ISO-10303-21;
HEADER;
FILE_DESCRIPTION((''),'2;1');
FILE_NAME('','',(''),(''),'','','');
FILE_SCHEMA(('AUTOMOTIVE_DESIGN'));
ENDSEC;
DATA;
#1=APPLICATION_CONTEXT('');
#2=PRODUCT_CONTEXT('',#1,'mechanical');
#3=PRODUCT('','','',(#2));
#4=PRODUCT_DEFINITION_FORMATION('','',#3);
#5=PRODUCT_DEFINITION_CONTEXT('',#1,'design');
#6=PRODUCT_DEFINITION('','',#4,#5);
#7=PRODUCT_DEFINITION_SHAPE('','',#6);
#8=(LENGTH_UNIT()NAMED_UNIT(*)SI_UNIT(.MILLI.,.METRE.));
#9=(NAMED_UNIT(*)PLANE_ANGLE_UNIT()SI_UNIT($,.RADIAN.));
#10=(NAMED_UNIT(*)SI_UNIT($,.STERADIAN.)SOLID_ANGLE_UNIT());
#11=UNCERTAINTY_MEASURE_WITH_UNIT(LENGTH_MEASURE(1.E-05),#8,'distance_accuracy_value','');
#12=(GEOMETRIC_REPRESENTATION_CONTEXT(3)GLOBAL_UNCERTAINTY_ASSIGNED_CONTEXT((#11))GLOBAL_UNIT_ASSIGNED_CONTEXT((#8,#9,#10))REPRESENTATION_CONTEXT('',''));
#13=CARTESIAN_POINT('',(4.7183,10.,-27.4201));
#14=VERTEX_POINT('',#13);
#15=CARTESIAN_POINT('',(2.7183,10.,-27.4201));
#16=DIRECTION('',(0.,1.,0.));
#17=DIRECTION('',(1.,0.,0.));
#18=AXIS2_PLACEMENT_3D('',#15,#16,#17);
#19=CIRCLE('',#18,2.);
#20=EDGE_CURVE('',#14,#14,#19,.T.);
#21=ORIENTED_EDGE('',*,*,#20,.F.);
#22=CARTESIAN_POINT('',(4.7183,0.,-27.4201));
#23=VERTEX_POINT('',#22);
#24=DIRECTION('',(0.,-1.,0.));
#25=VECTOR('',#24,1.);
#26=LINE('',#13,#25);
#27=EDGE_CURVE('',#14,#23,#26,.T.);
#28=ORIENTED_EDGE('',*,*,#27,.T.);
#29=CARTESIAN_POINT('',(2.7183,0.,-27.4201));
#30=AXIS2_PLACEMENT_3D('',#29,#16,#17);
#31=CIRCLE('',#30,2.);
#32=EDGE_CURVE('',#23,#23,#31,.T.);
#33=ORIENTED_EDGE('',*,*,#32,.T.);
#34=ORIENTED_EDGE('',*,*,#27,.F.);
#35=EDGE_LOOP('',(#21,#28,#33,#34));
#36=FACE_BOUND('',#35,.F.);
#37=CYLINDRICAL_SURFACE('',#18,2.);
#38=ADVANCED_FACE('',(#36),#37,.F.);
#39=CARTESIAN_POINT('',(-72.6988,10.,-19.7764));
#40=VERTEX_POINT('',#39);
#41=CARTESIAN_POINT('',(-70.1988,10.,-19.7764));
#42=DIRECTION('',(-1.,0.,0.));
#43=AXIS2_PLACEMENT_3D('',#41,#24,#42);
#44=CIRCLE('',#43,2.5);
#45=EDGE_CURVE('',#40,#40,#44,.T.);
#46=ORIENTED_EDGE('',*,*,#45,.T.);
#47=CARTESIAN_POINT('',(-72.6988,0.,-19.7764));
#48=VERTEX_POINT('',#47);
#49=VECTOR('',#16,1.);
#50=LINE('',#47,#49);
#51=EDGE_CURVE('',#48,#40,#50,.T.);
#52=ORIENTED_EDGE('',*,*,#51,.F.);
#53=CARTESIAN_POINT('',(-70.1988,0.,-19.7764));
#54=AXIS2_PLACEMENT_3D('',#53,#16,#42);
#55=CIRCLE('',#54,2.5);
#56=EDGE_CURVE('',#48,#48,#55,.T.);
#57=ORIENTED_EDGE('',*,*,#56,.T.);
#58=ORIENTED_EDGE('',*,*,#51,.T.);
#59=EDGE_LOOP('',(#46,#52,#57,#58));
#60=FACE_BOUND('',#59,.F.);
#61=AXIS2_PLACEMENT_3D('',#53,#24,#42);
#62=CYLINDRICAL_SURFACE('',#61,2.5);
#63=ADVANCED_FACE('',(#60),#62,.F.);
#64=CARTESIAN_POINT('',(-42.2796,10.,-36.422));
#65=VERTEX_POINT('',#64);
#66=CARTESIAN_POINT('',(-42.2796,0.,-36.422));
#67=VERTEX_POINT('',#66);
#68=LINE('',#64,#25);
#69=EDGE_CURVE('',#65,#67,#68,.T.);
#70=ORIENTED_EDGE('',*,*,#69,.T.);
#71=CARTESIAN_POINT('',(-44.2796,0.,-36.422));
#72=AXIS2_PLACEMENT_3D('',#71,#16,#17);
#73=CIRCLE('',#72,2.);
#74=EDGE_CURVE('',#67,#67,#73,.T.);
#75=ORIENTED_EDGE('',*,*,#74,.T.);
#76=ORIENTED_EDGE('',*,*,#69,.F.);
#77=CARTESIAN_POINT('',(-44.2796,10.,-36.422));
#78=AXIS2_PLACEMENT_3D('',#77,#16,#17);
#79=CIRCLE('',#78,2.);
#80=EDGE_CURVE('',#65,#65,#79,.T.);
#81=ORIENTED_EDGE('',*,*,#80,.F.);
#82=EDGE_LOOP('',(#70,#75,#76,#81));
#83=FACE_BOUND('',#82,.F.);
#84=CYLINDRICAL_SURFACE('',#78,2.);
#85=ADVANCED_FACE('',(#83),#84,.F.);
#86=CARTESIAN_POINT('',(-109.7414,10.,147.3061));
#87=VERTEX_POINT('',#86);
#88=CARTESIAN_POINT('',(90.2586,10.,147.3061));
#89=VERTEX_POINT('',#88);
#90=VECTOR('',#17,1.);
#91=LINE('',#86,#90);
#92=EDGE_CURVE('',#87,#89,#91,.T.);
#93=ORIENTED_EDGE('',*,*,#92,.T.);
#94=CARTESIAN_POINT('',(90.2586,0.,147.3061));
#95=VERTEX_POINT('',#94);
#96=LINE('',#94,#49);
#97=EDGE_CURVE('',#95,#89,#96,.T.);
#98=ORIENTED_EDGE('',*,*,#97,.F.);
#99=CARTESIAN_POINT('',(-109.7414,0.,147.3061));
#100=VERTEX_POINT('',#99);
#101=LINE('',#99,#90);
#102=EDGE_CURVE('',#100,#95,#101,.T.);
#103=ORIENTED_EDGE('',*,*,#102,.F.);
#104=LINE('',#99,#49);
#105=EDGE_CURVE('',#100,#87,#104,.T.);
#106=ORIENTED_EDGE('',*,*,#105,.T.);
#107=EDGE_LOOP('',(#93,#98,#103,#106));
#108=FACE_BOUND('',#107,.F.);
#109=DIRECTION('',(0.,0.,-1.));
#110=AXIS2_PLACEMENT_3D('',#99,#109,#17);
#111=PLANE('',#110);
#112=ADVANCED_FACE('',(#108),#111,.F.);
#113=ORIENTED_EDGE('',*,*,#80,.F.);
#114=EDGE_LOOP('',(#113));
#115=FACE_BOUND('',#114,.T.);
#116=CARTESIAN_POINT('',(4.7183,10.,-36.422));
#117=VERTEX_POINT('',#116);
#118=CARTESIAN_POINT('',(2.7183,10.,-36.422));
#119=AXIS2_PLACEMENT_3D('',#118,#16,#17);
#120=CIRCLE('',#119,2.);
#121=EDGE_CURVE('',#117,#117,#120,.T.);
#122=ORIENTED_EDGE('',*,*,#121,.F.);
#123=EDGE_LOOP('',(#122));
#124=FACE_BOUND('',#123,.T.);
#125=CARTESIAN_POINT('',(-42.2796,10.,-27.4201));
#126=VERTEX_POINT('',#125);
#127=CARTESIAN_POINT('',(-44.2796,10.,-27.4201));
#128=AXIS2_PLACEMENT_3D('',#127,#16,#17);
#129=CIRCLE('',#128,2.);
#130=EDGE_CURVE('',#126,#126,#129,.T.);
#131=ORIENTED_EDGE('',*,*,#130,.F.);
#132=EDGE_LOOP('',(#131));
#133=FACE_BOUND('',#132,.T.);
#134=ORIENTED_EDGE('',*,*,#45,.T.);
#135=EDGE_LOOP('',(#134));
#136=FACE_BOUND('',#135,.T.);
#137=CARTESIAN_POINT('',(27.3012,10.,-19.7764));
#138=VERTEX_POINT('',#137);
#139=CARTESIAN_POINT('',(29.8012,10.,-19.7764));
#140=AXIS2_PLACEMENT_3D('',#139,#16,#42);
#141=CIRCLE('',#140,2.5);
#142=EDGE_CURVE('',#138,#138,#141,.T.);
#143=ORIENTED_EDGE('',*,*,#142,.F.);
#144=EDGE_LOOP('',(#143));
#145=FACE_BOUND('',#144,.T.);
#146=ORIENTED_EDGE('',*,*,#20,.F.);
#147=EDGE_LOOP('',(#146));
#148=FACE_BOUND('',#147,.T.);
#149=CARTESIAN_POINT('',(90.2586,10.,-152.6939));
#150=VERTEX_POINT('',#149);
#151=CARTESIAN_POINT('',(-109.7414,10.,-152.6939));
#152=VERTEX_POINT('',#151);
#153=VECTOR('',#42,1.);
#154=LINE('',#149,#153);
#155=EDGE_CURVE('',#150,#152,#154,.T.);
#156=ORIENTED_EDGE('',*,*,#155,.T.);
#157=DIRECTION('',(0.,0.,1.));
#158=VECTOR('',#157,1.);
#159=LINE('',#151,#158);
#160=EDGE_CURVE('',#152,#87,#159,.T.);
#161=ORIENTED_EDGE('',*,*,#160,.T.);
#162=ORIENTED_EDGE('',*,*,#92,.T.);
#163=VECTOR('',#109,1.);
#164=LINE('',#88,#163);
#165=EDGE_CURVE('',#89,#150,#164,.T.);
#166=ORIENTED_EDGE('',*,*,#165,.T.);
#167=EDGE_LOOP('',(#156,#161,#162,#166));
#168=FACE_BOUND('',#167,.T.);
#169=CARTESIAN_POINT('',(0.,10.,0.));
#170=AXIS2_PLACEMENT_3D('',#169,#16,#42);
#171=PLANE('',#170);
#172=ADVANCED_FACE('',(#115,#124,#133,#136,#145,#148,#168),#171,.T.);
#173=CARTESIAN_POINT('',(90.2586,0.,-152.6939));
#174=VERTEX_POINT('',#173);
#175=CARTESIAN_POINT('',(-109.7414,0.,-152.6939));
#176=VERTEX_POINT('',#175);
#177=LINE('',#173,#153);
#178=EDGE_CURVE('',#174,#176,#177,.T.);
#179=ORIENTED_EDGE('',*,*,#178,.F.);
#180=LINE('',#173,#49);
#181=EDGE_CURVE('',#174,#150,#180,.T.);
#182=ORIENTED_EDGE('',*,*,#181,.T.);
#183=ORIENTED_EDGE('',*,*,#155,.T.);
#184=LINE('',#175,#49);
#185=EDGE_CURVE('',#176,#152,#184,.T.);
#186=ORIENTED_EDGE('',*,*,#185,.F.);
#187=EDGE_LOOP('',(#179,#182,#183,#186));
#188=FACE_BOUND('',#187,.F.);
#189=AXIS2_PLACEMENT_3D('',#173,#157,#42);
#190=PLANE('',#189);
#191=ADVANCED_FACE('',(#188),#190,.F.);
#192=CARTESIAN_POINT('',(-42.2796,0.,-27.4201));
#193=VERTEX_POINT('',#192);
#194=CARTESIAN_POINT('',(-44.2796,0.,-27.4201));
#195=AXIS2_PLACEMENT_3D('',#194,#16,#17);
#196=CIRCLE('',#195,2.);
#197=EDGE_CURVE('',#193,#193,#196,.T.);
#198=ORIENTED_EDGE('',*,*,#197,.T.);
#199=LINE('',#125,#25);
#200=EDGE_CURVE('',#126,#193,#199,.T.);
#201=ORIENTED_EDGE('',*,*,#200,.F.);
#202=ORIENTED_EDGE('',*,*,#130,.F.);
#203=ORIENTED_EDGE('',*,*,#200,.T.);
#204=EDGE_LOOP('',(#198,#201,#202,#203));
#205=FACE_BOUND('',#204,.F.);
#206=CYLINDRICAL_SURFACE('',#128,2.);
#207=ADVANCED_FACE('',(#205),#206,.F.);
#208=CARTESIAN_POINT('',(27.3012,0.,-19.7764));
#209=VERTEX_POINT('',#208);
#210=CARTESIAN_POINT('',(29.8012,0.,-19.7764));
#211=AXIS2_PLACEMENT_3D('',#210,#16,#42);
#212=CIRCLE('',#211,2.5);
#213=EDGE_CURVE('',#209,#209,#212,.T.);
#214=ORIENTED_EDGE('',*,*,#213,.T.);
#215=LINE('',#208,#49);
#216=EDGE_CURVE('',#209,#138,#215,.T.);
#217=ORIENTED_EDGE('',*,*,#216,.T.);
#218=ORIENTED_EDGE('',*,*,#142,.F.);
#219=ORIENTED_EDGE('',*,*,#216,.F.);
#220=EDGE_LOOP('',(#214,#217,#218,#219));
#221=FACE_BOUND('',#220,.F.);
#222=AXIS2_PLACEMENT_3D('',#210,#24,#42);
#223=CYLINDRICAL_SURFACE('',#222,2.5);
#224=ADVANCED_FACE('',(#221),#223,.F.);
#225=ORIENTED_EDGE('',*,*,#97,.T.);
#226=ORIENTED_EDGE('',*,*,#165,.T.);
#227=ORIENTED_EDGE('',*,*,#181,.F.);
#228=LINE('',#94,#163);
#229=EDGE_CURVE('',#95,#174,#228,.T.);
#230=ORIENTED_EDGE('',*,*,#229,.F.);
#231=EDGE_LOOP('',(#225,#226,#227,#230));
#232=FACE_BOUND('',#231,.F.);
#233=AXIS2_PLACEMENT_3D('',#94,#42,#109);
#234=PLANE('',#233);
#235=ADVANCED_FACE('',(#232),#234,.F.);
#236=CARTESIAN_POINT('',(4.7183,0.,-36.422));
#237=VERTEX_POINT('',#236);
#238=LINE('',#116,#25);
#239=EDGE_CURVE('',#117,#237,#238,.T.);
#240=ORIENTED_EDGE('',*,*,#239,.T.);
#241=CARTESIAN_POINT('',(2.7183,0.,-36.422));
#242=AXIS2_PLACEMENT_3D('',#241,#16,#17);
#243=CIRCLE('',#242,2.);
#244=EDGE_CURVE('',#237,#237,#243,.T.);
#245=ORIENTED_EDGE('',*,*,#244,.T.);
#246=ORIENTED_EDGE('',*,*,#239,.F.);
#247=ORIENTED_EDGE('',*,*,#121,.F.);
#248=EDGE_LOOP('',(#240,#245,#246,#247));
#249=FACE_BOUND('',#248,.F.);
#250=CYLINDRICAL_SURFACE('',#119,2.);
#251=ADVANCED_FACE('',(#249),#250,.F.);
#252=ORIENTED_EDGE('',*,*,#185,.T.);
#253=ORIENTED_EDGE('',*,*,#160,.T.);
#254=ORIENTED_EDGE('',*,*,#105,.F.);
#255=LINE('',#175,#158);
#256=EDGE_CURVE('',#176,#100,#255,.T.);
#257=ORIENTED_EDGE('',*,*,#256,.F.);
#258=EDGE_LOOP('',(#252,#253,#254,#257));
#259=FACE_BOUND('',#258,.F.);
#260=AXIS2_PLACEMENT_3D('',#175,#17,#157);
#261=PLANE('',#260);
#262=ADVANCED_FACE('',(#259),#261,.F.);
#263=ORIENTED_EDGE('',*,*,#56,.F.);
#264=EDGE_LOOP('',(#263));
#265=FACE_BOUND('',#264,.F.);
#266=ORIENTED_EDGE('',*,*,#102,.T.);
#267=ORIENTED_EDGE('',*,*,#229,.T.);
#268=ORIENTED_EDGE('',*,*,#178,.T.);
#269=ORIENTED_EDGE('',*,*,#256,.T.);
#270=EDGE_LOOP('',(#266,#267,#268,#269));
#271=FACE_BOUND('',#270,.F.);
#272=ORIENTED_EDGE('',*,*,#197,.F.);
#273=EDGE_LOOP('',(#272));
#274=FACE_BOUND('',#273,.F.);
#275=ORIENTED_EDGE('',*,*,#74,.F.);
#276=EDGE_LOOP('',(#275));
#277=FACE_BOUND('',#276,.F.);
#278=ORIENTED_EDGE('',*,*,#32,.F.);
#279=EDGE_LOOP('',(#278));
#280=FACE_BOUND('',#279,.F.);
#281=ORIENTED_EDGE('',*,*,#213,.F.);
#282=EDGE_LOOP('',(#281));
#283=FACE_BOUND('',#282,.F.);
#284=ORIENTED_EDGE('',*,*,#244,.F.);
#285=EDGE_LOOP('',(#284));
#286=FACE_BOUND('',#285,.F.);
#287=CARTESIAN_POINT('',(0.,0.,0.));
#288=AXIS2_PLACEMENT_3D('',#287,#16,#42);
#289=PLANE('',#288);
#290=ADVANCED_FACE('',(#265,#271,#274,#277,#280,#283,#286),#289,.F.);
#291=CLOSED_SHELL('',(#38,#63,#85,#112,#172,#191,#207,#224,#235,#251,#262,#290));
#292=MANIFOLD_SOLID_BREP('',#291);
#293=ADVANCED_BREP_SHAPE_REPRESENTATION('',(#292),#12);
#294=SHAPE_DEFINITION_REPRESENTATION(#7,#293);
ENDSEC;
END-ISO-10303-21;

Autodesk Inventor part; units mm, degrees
ref_plane "YZ Plane" through (0, 0, 0) normal (1, 0, 0) x (0, 1, 0)
ref_plane "XZ Plane" through (0, 0, 0) normal (0, 1, 0) x (-1, 0, 0)
ref_plane "XY Plane" through (0, 0, 0) normal (0, 0, 1) x (1, 0, 0)
sketch "Sketch1" plane through (0, 0, 0) normal (0, 1, 0) x (-1, 0, 0)
  line L0 (109.7414, 147.3061) -> (-90.2586, 147.3061)
  line L1 (-90.2586, 147.3061) -> (-90.2586, -152.6939)
  line L2 (-90.2586, -152.6939) -> (109.7414, -152.6939)
  line L3 (109.7414, -152.6939) -> (109.7414, 147.3061)
  circle A0 centre (70.1988, -19.7764) radius 2.5
  circle A1 centre (-29.8012, -19.7764) radius 2.5
  line L4 (70.1988, -19.7764) -> (-29.8012, -19.7764)
  point P0 (0, 0)
  dimension "d0" = 200
  dimension "d1" = 300
  dimension "d2" = 5
  dimension "d3" = 5
  dimension "d4" = 100
extrude "Extrusion1" add sketch "Sketch1" along normal blind 10
sketch "Sketch3" plane through (0, 10, 0) normal (0, 1, 0) x (1, 0, 0)
  point P0 (0, 0)
sketch "Sketch4" plane through (0, 10, 0) normal (0, 1, 0) x (1, 0, 0)
  circle A0 centre (-44.2796, 27.4201) radius 2
  circle A1 centre (2.7183, 27.4201) radius 2
  circle A2 centre (-44.2796, 36.422) radius 2
  circle A3 centre (2.7183, 36.422) radius 2
  point P0 (0, 0)
  dimension "d11" = 4
  dimension "d13" = 4
  dimension "d16" = 4
  dimension "d17" = 4
extrude "Extrusion3" cut sketch "Sketch4" against normal blind 10
properties part number "basestand"
